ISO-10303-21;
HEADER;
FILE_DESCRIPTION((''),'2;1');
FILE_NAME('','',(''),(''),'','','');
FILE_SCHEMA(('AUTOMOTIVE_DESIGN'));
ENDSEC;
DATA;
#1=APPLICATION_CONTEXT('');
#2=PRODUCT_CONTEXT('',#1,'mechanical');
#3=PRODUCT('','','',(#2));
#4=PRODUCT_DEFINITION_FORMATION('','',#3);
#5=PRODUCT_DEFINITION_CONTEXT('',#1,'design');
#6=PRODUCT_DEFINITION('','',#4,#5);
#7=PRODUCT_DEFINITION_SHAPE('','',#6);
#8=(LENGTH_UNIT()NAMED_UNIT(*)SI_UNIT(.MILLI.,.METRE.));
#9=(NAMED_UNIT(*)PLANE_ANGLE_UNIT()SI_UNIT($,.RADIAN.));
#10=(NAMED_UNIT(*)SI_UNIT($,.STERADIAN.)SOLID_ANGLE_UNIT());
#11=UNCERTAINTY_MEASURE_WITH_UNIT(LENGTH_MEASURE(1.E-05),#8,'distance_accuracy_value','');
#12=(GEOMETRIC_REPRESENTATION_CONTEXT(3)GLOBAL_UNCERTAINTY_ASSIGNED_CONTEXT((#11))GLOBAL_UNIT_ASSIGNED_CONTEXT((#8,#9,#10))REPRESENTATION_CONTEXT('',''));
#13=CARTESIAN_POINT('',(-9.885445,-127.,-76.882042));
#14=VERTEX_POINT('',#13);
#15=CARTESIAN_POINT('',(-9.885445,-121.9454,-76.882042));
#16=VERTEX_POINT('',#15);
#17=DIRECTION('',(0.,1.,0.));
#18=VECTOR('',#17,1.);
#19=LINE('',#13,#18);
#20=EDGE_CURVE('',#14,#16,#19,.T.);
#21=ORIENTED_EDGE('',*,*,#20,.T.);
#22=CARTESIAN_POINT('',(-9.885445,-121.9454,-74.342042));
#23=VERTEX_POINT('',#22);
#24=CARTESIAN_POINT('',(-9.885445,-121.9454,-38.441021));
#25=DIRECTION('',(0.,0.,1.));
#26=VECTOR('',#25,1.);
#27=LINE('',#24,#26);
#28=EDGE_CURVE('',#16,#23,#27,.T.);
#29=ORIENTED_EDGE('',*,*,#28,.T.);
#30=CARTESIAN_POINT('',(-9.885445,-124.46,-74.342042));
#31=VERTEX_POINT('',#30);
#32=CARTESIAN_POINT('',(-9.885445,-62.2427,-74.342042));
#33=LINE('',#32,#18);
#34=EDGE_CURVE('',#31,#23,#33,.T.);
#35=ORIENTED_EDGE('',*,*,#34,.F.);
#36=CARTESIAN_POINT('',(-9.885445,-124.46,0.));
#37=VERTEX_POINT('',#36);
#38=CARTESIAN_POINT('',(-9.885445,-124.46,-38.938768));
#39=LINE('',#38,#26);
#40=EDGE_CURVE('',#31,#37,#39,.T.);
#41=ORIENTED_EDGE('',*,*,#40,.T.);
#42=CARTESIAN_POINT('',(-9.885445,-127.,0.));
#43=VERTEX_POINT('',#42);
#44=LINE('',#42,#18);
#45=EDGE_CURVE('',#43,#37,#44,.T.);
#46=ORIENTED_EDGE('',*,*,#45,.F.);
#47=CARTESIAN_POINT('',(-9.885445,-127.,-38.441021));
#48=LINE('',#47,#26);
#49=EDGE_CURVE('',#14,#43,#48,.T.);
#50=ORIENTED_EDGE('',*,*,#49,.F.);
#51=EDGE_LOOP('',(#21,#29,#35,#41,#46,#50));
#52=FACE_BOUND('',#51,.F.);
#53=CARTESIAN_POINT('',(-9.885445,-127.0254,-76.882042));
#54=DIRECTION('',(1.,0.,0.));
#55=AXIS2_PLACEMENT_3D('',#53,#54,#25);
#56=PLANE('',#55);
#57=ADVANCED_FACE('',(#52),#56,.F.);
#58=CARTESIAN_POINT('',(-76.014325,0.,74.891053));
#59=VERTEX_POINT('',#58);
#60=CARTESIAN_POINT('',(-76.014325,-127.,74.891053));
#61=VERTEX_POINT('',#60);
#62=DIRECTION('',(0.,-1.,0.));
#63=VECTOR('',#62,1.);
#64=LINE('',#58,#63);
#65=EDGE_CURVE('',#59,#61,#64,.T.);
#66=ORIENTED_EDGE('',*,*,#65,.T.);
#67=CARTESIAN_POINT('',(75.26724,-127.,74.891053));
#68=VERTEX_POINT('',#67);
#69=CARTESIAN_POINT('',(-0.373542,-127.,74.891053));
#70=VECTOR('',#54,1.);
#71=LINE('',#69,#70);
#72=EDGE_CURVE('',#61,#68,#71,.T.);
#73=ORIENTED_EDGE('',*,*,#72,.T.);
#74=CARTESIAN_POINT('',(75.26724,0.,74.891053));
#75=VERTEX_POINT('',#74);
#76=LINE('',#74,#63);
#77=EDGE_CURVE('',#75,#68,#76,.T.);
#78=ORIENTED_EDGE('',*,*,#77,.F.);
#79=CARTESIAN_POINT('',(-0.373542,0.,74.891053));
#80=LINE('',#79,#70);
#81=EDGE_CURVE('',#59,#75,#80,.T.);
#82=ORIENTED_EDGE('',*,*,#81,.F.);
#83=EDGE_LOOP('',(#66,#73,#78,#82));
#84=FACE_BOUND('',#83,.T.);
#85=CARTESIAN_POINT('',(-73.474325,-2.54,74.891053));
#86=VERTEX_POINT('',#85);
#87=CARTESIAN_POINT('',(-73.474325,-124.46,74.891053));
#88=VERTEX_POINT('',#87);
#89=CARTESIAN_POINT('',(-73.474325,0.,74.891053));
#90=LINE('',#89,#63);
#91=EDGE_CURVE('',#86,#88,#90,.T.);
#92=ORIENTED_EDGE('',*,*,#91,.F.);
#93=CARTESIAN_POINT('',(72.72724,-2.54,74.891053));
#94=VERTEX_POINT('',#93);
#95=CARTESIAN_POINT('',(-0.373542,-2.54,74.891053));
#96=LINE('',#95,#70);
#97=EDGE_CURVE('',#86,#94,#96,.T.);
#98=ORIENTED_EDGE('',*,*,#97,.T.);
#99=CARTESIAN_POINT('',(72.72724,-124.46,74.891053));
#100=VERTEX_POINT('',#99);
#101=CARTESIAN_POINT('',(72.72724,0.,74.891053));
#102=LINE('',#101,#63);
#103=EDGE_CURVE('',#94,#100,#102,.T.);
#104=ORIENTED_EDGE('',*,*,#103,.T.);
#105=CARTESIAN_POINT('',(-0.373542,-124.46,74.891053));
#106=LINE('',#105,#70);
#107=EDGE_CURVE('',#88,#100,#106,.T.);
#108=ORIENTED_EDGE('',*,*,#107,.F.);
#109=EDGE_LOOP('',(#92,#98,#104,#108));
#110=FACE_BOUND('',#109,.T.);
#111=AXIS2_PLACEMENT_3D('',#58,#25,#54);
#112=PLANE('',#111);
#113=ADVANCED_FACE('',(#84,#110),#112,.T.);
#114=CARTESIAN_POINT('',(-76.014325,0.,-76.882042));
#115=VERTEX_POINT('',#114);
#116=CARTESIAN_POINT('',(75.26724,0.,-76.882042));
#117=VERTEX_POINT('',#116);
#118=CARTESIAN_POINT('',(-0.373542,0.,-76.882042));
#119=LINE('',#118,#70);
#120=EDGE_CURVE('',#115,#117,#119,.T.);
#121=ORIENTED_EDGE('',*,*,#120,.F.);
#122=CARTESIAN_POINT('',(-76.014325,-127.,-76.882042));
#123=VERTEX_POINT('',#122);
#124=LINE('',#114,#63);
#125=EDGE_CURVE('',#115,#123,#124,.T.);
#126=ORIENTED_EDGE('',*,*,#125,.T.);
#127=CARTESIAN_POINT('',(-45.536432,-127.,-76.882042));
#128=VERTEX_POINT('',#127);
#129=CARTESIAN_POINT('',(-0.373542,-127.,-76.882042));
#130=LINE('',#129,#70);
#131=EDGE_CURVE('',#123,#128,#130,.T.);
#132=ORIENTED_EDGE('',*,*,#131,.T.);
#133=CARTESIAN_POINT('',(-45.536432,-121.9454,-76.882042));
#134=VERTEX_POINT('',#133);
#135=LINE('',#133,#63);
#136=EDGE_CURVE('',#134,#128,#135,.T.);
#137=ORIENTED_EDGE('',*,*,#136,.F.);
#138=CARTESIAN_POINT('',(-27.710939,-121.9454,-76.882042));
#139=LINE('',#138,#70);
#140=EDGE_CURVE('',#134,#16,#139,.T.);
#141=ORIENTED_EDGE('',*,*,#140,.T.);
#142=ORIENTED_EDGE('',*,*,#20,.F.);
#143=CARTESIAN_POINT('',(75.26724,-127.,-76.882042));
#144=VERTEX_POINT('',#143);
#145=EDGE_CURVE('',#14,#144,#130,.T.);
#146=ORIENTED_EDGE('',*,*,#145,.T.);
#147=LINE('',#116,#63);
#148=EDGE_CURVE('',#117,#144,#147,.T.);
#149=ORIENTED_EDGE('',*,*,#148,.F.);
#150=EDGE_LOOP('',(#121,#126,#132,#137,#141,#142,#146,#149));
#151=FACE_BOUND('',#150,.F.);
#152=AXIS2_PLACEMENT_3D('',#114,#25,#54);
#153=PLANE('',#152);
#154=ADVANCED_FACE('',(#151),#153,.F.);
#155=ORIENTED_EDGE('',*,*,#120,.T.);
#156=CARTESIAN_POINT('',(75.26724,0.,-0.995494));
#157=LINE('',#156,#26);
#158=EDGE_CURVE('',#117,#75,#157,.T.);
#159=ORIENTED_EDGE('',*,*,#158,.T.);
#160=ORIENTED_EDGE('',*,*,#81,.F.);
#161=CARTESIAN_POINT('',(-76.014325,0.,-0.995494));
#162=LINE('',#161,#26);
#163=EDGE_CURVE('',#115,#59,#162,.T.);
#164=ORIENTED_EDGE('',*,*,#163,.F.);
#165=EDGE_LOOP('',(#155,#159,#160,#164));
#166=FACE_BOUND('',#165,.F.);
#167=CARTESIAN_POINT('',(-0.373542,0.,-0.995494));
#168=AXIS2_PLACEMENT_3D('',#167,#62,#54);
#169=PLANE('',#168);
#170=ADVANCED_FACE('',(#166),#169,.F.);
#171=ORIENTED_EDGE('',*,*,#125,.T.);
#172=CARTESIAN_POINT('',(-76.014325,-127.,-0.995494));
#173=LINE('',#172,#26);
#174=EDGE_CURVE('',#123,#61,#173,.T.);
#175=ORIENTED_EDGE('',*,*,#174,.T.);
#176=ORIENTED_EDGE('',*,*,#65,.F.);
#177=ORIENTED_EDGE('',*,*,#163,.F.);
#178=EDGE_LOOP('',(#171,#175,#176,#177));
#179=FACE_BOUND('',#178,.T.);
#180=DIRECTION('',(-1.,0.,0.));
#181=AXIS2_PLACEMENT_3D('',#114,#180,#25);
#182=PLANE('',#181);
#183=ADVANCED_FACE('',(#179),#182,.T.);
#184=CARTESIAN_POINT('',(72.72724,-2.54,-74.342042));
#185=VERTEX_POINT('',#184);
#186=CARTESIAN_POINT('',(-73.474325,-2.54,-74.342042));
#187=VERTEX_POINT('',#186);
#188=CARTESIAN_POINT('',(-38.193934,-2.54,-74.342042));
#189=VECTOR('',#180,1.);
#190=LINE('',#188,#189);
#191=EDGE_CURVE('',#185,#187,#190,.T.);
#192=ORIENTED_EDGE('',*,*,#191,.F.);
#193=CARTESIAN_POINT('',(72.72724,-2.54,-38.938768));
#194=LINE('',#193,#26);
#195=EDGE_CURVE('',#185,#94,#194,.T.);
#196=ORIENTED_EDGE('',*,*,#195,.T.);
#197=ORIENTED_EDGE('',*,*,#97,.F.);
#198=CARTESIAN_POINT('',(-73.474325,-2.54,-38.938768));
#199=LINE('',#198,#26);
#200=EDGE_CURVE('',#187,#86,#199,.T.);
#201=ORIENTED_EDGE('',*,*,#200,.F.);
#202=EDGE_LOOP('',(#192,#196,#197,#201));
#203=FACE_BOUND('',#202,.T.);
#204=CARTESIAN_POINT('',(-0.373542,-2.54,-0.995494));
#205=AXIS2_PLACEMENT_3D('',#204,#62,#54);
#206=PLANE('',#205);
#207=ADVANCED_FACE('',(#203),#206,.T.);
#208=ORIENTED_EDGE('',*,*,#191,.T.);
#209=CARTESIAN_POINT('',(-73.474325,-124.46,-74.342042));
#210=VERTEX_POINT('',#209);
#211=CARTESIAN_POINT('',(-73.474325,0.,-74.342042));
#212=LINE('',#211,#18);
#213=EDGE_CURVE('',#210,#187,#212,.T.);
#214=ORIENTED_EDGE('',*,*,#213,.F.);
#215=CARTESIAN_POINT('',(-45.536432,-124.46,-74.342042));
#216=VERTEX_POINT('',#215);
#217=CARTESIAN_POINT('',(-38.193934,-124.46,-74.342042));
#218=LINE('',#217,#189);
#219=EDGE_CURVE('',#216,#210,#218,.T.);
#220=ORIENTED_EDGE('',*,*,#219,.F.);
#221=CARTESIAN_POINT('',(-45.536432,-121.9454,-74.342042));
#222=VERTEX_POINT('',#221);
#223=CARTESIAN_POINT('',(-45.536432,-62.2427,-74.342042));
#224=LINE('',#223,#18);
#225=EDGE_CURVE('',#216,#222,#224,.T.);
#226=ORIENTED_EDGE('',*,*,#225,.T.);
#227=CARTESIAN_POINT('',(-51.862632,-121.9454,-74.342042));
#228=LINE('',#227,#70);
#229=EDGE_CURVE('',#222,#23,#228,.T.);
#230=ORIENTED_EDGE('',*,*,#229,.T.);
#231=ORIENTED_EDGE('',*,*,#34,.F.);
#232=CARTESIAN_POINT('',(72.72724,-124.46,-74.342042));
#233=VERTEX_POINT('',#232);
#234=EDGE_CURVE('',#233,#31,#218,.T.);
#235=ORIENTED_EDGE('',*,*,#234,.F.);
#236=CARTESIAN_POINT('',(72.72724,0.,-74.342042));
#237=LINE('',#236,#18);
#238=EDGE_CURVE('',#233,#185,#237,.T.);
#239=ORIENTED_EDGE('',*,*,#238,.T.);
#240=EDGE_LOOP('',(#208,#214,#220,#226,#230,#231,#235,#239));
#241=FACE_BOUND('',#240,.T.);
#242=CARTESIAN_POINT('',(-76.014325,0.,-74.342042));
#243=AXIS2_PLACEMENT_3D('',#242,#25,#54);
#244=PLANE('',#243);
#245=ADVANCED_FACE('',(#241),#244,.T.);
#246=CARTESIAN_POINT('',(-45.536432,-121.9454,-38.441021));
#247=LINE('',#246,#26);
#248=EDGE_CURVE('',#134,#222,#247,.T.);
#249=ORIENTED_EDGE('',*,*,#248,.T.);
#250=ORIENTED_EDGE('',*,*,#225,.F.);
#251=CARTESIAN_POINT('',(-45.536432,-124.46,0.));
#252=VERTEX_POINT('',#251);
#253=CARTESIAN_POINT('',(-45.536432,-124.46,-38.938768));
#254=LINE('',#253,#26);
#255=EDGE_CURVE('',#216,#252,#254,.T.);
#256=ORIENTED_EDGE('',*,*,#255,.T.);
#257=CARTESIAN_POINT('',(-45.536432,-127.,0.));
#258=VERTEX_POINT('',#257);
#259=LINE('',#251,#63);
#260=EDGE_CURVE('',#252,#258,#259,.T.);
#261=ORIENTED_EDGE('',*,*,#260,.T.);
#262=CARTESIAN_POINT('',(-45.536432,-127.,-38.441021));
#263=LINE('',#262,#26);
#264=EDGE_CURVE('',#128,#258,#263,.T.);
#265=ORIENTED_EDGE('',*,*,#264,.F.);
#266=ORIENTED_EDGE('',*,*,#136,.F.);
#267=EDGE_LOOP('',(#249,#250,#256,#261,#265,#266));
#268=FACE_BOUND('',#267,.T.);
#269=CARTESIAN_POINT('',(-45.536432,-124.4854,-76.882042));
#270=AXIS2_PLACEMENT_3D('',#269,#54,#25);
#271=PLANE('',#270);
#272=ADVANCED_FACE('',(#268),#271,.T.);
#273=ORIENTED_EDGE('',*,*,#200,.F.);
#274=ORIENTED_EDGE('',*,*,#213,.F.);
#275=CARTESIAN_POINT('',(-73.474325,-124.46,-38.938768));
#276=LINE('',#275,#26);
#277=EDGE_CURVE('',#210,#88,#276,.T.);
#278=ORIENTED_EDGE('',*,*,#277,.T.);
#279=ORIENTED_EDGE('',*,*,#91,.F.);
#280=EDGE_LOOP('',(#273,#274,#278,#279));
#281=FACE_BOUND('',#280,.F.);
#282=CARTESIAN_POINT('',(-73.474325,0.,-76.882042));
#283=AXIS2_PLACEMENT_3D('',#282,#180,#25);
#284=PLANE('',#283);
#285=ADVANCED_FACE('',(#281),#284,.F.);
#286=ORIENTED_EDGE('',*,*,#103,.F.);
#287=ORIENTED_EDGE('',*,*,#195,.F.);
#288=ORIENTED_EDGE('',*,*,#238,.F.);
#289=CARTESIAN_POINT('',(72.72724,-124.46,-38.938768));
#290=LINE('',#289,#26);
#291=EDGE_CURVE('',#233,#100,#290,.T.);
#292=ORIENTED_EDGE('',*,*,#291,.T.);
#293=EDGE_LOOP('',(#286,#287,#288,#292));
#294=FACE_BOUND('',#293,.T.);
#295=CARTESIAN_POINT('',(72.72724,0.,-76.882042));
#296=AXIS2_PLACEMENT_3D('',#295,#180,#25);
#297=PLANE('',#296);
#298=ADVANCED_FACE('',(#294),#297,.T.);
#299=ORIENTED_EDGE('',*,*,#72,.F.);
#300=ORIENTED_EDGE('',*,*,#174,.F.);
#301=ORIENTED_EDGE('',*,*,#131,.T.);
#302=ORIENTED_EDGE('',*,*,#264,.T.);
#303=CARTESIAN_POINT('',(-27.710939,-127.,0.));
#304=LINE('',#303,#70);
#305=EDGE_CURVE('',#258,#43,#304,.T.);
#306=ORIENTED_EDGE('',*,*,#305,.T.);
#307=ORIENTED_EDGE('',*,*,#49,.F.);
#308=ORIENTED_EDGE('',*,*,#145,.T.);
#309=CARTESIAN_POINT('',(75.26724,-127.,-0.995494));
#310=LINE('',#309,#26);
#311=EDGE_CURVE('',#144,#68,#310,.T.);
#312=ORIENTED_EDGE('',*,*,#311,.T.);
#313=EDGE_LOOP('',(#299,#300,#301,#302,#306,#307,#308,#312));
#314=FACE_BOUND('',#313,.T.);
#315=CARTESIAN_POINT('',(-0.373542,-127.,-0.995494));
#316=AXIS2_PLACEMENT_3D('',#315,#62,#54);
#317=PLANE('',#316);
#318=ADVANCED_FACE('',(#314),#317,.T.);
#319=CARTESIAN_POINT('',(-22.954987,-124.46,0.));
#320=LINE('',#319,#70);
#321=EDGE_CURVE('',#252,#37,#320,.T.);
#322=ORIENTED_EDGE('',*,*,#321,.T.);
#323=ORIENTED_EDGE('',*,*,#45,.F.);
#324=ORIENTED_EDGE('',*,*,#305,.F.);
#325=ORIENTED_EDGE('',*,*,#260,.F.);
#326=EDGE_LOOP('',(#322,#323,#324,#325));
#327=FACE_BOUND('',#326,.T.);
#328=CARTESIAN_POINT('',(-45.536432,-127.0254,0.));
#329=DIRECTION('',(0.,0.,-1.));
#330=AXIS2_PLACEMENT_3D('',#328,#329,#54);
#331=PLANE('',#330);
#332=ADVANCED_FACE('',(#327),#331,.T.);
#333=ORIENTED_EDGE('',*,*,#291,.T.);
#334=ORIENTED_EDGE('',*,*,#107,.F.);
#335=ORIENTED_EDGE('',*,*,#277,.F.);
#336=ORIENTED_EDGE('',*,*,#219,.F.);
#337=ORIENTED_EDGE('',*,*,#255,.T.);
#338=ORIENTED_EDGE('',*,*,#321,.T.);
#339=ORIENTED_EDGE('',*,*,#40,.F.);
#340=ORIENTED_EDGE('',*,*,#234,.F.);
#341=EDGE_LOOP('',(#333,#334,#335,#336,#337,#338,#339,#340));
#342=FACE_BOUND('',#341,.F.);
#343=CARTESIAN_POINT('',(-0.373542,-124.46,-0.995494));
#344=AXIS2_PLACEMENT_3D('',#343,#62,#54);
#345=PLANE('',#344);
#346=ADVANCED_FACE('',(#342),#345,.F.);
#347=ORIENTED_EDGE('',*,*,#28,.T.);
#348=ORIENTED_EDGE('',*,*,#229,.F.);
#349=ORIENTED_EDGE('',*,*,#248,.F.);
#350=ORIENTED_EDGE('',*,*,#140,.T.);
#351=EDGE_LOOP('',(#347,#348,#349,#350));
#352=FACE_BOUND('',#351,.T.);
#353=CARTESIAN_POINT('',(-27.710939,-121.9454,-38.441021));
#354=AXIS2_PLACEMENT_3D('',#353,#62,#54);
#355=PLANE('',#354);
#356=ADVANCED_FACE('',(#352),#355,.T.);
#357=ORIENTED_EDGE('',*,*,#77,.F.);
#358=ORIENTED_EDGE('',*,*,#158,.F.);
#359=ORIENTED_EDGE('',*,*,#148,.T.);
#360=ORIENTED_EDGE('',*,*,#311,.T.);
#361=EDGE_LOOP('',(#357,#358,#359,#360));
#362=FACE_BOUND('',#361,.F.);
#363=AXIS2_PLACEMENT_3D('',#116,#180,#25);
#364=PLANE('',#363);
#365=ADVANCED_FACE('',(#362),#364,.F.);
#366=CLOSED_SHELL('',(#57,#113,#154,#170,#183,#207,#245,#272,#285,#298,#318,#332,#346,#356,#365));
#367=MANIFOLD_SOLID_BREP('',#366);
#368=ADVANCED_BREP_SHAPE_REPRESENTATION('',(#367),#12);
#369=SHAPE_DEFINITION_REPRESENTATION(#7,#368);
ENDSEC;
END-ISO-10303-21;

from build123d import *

# Parameters (mm, degrees)
F0_W      = 152.267947793
F0_H      = 151.1743441224
F1_DEPTH  = 101.6
F2_SIZE   = 50.8
F3_SIZE   = 50.79999
F4_SIZE   = 50.8
F5_T      = -2.54
F7_W      = 151.2815654278
F7_H      = 151.7730951309
F8_DEPTH  = 127
F9_T      = -2.54
F10_W     = 35.6509871781
F10_H     = 76.8820419908
F11_DEPTH = 0.0254
F12_DEPTH = 2.54
F13_DEPTH = 2.54


# Not quite as in the source:
# - a fillet or chamfer is up to 0.001 mm smaller than in the source, because OpenCascade refuses the exact size


with BuildPart() as f1:
    # F0 (on Top) → F1 (new body)
    with BuildSketch(Plane.XY):
        with Locations((-0.6233751774, 0.4115886986)):
            Rectangle(F0_W, F0_H)
    extrude(amount=F1_DEPTH)

    # F2
    f2_edges = [f1.edges().sort_by_distance(p)[0] for p in [
        (-76.757349, 0.411589, 101.6),
        (-0.623375, -75.175583, 101.6),
        (75.510599, 0.411589, 101.6),
        (-0.623375, 75.998761, 101.6),
    ]]
    chamfer(f2_edges, length=F2_SIZE)

    # F3 (size 50.8 in the source; OpenCascade refuses exactly that, so slightly less here)
    f3_edges = [f1.edges().sort_by_distance(p)[0] for p in [
        (-0.623375, -75.175583, 0),
    ]]
    chamfer(f3_edges, length=F3_SIZE)

    # F4
    f4_edges = [f1.edges().sort_by_distance(p)[0] for p in [
        (75.510599, 75.998761, 25.4),
    ]]
    chamfer(f4_edges, length=F4_SIZE)

    # F5
    f5_openings = [f1.faces().sort_by_distance(p)[0] for p in [
        (-0.623375, 0.411589, 101.6),
    ]]
    offset(amount=F5_T, openings=f5_openings)


with BuildPart() as f8:
    # F7 (on Front) → F8 (new body)
    with BuildSketch(Plane.XZ):
        with Locations((-0.3735423088, -0.9954944253)):
            Rectangle(F7_W, F7_H)
    extrude(amount=F8_DEPTH)

    # F9
    f9_openings = [f8.faces().sort_by_distance(p)[0] for p in [
        (-0.373542, -63.5, 74.891053),
    ]]
    offset(amount=F9_T, openings=f9_openings)

    # F10 (on face) → F11 (join)
    with BuildSketch(Plane.XZ.offset(127)):
        with Locations((-27.7109388262, -38.4410209954)):
            Rectangle(F10_W, F10_H)
    extrude(amount=F11_DEPTH)

    # F12 (cut): a face of the model
    f12_faces = [f8.faces().sort_by_distance(p)[0] for p in [
        (-27.7109388262, -127.0254, -38.4410209954),
    ]]
    extrude(f12_faces, amount=-F12_DEPTH, mode=Mode.SUBTRACT)

    # F13 (cut): a face of the model
    f13_faces = [f8.faces().sort_by_distance(p)[0] for p in [
        (-27.7109388262, -124.4854, -38.4410209954),
    ]]
    extrude(f13_faces, amount=-F13_DEPTH, mode=Mode.SUBTRACT)


solid = f8.part
